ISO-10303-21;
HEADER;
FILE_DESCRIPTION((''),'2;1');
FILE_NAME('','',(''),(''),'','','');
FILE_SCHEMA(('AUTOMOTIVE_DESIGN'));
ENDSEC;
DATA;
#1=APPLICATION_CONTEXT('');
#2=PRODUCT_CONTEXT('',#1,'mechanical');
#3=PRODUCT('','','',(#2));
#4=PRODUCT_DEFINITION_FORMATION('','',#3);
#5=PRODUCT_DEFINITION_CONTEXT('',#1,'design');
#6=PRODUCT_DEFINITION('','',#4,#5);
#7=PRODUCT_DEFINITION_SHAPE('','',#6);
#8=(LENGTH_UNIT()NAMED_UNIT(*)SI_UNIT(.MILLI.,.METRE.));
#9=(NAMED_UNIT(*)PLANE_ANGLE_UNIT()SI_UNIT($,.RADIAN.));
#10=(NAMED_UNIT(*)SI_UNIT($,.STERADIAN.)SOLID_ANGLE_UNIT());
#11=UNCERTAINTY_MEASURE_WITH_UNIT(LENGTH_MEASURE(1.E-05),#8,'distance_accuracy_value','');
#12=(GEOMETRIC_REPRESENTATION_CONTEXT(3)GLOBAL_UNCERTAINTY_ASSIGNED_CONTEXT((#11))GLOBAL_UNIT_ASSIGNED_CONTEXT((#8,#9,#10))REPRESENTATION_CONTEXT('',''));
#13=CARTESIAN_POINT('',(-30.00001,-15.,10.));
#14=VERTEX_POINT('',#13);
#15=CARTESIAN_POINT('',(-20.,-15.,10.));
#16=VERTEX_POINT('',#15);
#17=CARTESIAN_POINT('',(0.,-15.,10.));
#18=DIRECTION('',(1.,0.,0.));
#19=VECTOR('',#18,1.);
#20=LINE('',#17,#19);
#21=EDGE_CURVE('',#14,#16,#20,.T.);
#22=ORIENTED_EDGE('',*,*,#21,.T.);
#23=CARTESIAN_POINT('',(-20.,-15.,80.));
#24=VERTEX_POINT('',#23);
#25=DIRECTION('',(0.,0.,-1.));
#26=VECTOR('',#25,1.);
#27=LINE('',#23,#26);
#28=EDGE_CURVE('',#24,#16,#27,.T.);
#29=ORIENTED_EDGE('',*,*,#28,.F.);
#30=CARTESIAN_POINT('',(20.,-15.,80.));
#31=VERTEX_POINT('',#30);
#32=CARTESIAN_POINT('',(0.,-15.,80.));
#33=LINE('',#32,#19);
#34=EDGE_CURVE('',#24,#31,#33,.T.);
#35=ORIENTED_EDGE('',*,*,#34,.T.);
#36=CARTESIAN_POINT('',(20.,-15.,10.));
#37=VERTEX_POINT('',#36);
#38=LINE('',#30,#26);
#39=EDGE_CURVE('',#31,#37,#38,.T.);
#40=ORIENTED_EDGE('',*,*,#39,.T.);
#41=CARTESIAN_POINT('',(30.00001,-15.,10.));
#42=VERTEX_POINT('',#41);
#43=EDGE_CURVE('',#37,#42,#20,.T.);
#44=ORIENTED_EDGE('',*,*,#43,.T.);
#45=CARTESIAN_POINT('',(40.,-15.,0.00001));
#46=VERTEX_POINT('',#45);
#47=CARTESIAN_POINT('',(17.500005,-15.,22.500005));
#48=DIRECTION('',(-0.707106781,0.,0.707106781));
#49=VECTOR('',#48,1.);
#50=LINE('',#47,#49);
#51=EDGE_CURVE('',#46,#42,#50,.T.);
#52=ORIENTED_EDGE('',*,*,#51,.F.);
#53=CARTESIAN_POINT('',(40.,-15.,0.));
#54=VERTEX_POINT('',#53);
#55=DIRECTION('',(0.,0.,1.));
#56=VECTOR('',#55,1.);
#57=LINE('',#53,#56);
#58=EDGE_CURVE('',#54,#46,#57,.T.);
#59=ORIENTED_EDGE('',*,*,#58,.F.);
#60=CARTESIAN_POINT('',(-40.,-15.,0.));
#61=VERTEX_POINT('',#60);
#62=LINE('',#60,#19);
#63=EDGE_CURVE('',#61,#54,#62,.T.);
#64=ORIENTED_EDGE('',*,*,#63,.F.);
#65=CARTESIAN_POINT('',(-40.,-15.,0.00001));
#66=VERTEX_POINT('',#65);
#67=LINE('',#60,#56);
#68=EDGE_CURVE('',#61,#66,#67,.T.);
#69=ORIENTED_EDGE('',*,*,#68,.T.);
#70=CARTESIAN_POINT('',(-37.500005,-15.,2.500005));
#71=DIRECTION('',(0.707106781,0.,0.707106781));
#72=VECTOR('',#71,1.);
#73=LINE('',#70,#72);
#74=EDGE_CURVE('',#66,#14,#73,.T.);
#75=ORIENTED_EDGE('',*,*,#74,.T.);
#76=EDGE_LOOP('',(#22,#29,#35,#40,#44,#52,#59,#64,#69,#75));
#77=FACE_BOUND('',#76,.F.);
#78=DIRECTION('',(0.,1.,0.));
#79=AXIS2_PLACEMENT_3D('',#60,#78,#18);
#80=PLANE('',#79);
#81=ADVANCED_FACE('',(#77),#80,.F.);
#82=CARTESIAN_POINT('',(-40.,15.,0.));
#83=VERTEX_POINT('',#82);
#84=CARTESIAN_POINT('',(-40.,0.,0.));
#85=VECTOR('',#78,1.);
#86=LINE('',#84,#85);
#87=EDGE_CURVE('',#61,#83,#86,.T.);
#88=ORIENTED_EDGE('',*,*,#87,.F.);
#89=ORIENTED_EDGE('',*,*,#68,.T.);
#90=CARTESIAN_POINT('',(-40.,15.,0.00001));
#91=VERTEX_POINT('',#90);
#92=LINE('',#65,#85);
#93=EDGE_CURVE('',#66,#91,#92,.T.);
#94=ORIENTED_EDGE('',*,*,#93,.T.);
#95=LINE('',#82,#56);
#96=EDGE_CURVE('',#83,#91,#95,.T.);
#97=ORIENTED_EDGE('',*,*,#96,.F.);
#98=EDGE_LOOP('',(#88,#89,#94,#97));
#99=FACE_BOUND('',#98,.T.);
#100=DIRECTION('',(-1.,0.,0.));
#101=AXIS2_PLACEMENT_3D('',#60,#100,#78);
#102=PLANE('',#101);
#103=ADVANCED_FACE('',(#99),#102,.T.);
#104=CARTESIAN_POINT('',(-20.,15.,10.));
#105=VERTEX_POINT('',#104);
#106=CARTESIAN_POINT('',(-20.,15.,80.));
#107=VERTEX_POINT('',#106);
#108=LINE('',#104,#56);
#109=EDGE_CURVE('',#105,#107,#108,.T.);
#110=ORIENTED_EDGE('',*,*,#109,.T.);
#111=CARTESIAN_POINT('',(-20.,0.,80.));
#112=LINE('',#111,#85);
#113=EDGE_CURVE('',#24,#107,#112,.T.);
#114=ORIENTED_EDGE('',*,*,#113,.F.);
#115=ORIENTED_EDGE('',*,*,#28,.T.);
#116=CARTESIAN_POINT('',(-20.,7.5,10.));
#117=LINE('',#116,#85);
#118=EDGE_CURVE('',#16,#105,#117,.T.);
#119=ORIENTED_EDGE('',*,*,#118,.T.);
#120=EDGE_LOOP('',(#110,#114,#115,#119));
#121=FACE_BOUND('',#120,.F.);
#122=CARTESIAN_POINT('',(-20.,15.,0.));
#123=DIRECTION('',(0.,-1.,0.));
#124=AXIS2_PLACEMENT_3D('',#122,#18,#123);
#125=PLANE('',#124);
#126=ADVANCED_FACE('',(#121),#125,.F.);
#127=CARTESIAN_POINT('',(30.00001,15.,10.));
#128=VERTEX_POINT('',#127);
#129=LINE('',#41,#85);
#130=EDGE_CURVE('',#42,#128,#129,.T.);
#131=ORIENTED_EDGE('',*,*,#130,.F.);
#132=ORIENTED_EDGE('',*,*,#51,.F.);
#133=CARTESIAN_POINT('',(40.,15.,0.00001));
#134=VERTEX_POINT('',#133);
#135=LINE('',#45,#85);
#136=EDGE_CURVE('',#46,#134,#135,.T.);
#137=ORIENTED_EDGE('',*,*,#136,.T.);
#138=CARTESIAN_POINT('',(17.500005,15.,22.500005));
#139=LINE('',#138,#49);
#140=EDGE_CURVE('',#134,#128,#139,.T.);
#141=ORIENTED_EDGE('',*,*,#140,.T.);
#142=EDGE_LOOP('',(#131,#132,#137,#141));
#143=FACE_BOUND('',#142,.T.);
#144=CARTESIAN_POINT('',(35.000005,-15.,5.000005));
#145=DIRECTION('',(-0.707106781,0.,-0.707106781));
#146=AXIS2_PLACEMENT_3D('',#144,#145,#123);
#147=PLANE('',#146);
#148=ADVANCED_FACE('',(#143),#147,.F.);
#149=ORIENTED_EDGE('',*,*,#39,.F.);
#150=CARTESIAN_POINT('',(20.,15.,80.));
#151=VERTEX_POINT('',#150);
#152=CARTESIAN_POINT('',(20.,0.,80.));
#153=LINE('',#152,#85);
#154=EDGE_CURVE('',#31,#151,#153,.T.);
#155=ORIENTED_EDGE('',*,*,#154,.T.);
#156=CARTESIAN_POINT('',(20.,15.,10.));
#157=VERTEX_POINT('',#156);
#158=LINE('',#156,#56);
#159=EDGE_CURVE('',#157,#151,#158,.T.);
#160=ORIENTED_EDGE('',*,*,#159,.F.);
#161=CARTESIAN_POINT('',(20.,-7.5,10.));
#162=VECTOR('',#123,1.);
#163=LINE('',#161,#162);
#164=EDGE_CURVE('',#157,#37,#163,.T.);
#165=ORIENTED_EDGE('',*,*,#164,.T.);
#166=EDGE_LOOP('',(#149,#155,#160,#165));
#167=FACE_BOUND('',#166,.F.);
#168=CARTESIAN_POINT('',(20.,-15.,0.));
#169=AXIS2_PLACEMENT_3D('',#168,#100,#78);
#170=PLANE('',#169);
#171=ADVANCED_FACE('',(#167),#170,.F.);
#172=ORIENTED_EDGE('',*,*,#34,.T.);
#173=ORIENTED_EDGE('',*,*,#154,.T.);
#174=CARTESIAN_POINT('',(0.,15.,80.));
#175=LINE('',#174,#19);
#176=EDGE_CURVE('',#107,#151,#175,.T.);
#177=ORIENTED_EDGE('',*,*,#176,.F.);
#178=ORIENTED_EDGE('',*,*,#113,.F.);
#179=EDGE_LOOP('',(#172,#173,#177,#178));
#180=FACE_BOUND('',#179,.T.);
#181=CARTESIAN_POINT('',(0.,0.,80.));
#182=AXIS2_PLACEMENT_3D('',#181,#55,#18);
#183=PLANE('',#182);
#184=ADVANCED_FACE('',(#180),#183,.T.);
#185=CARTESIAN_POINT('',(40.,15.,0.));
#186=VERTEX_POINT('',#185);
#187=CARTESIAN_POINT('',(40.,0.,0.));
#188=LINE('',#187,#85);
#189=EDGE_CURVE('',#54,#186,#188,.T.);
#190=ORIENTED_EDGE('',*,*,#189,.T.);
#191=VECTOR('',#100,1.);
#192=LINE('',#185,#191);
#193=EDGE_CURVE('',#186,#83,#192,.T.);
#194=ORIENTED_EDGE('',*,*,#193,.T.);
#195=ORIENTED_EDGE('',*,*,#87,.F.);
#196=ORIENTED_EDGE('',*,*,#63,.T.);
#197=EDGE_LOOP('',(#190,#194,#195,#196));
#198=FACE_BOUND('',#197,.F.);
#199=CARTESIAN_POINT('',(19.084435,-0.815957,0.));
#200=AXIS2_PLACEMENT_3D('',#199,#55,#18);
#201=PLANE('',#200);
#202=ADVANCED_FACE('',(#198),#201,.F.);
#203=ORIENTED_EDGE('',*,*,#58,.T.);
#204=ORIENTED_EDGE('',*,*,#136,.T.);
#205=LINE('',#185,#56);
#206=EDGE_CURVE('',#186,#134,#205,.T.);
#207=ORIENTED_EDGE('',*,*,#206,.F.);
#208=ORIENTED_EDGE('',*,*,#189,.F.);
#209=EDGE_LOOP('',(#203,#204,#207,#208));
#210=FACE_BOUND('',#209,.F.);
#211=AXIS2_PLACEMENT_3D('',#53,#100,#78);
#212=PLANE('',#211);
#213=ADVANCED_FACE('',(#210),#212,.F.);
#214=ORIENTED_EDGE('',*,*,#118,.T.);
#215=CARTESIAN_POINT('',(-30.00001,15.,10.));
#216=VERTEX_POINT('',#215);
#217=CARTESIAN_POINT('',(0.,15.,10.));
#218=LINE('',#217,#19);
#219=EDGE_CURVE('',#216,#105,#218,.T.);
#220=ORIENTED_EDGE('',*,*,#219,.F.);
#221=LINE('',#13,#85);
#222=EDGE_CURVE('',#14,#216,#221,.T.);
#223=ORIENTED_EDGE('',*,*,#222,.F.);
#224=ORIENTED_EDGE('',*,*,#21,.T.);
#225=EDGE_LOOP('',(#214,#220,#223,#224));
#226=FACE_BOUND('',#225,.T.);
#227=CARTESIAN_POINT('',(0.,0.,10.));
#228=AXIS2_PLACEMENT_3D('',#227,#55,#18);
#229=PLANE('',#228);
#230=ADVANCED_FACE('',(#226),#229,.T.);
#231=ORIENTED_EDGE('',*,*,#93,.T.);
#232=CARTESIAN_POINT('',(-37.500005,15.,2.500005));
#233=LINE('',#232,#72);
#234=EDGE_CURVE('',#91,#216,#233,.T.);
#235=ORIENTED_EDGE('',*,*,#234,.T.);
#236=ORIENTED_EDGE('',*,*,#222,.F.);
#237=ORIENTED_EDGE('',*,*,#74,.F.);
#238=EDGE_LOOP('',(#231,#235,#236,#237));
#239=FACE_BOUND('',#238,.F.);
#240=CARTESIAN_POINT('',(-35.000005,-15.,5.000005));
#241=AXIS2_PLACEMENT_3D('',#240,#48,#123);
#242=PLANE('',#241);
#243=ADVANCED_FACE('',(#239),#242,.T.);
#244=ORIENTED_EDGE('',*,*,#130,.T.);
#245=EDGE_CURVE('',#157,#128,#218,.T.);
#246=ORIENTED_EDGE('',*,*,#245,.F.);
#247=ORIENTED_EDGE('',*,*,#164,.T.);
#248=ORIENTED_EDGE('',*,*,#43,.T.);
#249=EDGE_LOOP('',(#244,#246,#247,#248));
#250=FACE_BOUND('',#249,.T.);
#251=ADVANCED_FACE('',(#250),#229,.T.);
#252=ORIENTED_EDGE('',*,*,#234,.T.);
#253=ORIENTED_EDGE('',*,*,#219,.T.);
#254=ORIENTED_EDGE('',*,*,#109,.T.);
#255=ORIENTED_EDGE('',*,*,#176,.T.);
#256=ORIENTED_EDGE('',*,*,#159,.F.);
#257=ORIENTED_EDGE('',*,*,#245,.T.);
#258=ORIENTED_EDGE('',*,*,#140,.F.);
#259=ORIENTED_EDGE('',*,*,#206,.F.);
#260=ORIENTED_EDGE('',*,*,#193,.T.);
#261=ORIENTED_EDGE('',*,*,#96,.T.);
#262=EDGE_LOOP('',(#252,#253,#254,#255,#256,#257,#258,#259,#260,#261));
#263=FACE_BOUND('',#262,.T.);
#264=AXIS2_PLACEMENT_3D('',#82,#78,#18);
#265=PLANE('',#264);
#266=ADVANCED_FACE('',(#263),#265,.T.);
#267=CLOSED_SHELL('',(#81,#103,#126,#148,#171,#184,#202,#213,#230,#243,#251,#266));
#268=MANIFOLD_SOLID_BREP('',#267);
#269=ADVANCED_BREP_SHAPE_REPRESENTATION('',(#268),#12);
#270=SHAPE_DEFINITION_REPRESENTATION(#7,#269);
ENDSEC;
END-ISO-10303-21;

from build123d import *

# Parameters (mm, degrees)
F0_W      = 80
F0_H      = 30
F1_DEPTH  = 10
F2_SIZE   = 9.99999
F4_DEPTH  = 40
F4_FACE_W = 40
F4_FACE_H = 30
F5_DEPTH  = 40


# Not quite as in the source:
# - a fillet or chamfer is up to 0.001 mm smaller than in the source, because OpenCascade refuses the exact size


with BuildPart() as f1:
    # F0 (on Top) → F1 (new body)
    with BuildSketch(Plane.XY):
        Rectangle(F0_W, F0_H)
    extrude(amount=F1_DEPTH)

    # F2 (size 10 in the source; OpenCascade refuses exactly that, so slightly less here)
    f2_edges = [f1.edges().sort_by_distance(p)[0] for p in [
        (40, 0, 10),
        (-40, 0, 10),
    ]]
    chamfer(f2_edges, length=F2_SIZE)

    # F3 (on Top) → F4 (join)
    with BuildSketch(Plane.XY):
        Polygon((20, -15), (20, 15), (16.5369563365, -15), align=None)
        Polygon((16.5369563365, -15), (20, 15), (-16.5369563365, 15), (-20, -15), align=None)
        Polygon((-20, -15), (-16.5369563365, 15), (-20, 15), align=None)
    extrude(amount=F4_DEPTH)

    # F3 (on Top) + F4_face (on face) → F5 (join)
    with BuildSketch(Plane.XY):
        Polygon((20, -15), (20, 15), (16.5369563365, -15), align=None)
        Polygon((16.5369563365, -15), (20, 15), (-16.5369563365, 15), (-20, -15), align=None)
        Polygon((-20, -15), (-16.5369563365, 15), (-20, 15), align=None)
    with BuildSketch(Plane.XY.offset(40)):
        Rectangle(F4_FACE_W, F4_FACE_H)
    extrude(amount=F5_DEPTH)


solid = f1.part
